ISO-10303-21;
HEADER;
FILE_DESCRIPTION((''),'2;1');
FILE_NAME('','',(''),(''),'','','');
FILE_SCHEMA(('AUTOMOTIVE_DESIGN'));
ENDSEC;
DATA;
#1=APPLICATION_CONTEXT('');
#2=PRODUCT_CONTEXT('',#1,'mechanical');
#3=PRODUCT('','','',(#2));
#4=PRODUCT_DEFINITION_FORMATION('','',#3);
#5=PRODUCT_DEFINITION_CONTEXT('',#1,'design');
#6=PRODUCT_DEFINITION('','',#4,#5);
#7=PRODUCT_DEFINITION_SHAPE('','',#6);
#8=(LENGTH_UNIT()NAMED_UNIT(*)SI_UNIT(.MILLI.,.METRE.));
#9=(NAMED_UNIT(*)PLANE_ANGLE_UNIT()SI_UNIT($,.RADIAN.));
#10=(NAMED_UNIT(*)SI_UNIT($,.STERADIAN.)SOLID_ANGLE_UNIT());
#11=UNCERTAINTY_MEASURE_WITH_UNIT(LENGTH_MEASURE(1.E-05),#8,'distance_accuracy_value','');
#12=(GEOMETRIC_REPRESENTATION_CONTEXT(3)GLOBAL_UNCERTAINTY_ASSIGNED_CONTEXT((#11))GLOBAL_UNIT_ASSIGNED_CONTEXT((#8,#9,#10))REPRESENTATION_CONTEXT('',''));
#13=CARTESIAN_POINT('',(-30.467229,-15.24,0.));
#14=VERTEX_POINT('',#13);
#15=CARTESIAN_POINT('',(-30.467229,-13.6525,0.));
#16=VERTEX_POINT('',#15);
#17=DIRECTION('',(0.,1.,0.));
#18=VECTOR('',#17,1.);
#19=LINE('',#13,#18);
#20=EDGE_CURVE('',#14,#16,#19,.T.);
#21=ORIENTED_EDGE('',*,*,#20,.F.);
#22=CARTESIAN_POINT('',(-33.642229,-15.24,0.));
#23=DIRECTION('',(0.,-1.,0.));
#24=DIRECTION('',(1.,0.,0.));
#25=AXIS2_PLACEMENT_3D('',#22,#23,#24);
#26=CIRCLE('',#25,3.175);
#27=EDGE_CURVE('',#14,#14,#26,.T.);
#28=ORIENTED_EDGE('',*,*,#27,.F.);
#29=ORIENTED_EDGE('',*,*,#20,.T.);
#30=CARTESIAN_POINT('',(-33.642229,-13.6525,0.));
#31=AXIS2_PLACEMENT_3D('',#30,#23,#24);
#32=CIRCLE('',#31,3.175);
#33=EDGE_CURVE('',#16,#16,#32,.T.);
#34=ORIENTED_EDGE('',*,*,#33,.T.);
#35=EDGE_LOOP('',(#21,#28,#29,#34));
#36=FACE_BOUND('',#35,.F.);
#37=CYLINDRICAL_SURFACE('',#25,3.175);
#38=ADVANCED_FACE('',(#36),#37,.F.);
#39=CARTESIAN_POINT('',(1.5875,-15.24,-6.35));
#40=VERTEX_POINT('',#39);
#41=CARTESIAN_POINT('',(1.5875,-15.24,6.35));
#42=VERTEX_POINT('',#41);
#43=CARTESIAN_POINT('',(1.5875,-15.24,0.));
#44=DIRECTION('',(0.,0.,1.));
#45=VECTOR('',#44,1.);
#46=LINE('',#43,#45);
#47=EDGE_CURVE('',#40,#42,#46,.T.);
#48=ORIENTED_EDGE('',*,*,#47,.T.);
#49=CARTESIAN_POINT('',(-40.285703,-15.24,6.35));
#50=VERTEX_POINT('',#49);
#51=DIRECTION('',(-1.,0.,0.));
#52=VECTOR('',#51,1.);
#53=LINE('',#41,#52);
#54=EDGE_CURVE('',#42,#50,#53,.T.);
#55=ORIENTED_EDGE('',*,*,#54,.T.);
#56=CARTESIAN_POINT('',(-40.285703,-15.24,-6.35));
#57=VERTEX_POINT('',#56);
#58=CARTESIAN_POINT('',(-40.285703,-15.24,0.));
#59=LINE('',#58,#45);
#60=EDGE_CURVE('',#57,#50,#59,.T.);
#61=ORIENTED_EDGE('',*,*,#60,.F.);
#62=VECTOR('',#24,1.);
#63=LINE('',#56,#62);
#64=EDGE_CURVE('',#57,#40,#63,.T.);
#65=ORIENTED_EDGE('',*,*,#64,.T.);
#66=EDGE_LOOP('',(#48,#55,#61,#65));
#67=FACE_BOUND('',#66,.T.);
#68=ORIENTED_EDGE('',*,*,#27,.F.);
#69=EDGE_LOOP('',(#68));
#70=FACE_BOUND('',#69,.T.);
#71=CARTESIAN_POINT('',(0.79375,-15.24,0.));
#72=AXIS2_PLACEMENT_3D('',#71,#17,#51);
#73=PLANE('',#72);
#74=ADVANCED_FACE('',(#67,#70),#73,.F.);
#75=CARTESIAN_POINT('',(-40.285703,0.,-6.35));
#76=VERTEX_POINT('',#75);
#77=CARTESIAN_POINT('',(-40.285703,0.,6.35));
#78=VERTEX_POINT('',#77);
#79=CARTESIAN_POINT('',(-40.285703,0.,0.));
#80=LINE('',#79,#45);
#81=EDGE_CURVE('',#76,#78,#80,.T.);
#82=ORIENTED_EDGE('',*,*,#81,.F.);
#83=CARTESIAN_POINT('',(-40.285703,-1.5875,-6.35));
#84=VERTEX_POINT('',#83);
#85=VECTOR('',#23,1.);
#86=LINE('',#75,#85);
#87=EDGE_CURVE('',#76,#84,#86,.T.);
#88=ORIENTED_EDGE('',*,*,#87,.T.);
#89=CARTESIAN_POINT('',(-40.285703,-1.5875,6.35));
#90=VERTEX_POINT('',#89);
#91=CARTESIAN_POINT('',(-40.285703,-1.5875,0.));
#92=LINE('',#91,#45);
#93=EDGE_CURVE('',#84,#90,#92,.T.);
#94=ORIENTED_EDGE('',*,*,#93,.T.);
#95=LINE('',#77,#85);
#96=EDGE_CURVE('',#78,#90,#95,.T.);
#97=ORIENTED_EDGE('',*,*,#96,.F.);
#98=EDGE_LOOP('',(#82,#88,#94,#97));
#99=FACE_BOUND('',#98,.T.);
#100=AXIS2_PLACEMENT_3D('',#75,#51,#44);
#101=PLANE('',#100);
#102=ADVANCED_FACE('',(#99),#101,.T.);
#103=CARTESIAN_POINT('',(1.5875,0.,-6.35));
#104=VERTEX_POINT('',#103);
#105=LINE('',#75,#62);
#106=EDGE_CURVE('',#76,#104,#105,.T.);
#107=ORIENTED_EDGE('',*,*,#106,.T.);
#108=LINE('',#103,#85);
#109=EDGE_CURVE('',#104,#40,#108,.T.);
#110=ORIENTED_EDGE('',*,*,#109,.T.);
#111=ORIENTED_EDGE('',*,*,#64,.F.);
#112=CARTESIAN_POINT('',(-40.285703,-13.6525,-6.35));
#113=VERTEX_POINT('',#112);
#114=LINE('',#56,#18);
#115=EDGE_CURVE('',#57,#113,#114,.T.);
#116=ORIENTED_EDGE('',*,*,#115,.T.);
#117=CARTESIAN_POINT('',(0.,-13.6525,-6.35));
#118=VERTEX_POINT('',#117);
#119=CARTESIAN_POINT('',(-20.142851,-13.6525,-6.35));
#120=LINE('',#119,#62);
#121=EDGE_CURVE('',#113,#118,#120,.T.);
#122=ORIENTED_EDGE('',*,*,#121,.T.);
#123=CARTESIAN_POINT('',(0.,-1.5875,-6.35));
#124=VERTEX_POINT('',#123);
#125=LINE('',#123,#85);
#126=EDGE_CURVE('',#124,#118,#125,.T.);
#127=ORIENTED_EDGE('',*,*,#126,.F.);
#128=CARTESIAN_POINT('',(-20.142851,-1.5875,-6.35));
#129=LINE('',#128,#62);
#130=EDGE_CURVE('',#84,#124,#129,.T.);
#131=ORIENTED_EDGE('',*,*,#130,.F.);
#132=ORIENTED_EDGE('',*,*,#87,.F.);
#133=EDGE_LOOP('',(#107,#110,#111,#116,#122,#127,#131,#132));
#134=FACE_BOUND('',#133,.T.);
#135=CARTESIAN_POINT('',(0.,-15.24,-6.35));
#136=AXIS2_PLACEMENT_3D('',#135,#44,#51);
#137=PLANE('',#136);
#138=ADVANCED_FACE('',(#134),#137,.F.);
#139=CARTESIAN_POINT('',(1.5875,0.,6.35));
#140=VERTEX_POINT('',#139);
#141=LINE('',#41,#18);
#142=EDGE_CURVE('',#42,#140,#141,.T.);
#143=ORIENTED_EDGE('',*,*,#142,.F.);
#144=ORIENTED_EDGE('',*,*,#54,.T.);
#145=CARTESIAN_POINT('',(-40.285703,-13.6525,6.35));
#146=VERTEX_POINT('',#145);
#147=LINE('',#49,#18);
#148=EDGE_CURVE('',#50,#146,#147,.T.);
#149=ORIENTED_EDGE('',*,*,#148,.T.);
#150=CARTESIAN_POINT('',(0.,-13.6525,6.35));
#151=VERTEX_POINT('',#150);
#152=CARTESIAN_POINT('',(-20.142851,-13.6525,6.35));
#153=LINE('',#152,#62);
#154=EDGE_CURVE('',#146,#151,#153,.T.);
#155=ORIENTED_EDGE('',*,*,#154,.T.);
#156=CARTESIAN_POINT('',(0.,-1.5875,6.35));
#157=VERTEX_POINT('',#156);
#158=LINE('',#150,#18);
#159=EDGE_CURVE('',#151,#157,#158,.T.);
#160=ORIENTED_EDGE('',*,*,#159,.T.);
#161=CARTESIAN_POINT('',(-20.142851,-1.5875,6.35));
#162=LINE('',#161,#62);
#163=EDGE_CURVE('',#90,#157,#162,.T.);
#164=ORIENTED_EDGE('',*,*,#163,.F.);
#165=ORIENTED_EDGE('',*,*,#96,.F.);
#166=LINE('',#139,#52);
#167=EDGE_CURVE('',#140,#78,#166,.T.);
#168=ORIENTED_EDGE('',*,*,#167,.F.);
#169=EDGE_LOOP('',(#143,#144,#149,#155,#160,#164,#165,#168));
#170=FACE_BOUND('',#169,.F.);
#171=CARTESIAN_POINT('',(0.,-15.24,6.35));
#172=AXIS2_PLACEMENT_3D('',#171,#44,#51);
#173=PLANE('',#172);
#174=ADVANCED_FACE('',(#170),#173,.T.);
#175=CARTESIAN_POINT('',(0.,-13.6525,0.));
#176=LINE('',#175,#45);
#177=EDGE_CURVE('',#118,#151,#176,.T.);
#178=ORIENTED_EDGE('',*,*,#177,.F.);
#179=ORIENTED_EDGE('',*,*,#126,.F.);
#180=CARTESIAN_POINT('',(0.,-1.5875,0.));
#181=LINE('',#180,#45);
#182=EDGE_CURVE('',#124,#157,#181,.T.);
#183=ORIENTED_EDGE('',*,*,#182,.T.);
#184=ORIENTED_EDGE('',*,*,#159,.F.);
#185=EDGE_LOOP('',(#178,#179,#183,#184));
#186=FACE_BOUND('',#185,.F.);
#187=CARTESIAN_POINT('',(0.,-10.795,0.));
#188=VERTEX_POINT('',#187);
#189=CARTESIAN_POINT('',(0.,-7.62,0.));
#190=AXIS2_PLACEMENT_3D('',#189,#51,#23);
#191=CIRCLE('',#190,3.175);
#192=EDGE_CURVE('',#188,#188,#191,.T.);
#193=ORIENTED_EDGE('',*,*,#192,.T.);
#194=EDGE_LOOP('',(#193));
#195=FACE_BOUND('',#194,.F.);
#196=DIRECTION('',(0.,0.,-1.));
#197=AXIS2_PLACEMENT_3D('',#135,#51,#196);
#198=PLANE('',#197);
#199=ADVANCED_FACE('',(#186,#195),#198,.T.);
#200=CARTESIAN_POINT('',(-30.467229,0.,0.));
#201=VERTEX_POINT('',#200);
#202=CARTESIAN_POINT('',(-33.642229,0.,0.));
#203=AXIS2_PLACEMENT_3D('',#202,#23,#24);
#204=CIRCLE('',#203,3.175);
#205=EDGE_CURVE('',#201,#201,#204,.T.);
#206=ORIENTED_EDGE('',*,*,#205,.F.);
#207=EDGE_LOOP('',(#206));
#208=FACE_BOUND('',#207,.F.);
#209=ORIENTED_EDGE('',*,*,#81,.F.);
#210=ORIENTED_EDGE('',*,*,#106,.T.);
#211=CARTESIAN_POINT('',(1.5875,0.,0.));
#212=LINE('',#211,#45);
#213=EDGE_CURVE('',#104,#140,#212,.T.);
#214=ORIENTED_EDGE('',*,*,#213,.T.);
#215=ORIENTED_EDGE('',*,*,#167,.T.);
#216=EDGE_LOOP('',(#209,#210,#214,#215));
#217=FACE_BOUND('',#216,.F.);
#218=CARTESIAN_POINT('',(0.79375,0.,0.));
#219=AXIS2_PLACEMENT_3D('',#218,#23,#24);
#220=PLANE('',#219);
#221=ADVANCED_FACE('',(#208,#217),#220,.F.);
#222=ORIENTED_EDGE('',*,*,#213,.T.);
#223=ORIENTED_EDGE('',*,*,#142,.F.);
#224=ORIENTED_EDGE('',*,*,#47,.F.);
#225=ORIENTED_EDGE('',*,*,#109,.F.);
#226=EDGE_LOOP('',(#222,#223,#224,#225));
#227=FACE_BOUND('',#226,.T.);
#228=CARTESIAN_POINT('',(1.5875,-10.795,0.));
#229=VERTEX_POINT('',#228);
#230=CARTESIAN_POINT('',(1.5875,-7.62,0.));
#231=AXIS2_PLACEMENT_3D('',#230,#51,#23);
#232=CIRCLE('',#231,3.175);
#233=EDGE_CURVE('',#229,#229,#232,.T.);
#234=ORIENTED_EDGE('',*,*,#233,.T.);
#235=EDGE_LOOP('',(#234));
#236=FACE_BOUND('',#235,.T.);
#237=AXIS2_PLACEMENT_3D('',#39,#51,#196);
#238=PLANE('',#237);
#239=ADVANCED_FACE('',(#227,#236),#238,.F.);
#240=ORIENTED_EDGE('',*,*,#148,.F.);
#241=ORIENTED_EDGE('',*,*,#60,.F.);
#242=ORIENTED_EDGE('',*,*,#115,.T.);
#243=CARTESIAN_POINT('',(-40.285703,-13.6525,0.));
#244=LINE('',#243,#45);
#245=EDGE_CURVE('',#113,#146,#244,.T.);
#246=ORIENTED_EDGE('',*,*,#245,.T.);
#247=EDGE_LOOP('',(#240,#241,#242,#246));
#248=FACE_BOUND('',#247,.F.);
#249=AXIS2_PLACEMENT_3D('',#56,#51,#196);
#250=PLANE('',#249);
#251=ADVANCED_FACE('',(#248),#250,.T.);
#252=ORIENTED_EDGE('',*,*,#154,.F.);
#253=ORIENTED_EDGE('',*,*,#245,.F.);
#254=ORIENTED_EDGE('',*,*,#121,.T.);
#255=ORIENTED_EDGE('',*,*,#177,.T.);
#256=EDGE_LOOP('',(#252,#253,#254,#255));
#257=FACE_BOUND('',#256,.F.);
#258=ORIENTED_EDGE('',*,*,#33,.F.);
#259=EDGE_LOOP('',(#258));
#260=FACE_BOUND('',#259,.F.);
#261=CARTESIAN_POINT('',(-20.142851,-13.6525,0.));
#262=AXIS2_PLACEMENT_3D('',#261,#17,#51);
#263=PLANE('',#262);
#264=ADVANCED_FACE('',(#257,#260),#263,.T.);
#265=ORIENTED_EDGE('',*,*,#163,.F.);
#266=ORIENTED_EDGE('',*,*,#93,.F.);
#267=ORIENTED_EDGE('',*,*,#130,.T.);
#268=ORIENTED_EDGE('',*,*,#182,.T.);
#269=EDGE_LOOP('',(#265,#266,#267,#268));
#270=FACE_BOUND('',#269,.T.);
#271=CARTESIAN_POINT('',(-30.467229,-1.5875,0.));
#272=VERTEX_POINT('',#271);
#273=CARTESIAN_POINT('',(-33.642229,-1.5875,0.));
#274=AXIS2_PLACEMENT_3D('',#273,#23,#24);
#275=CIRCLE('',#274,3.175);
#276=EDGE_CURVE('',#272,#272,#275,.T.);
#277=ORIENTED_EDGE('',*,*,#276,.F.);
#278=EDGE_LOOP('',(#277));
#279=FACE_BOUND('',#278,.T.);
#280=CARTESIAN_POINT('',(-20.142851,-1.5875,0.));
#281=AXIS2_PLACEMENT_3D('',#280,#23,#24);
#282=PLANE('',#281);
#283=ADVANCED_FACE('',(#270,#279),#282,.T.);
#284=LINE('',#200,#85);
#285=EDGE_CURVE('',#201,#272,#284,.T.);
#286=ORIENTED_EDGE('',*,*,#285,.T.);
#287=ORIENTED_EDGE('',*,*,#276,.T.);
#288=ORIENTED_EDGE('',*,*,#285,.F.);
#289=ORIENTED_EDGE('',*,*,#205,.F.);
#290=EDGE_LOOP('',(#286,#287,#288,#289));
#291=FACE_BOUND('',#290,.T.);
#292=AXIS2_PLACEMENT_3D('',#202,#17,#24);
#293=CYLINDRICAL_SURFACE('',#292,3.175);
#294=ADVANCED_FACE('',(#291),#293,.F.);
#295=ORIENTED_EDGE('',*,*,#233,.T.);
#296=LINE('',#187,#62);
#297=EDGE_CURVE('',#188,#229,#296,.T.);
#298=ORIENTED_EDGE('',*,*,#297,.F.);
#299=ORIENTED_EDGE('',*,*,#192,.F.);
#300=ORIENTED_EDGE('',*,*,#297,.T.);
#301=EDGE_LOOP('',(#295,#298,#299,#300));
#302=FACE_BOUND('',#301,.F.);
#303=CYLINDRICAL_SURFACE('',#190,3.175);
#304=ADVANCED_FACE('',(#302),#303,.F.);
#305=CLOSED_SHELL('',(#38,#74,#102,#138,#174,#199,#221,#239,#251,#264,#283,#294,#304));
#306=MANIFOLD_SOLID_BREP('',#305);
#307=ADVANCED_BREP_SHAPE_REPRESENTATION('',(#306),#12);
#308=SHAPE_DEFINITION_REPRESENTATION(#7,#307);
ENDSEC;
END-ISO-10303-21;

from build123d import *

# Parameters (mm, degrees)
F0_W     = 40.2857027948
F0_H     = 12.7
F0_R     = 3.175
F1_DEPTH = 1.5875
F0_W_2   = 1.5875
F2_DEPTH = 7.62
F4_R     = 3.175
F5_DEPTH = 25.4


# Not quite as in the source:
# - a length typed as a fraction of an inch, garbled in the dataset ("3 / 203.2 mm" for 3/8 in), is restored


with BuildPart() as f1:
    # F0 (on Front) → F1 (new body)
    with BuildSketch(Plane.XZ):
        with Locations((-20.1428513974, 0)):
            Rectangle(F0_W, F0_H)
        with Locations((-33.6422286928, 0)):
            Circle(F0_R, mode=Mode.SUBTRACT)
    extrude(amount=F1_DEPTH)

    # F0 (on Front) → F2 (join)
    with BuildSketch(Plane.XZ):
        with Locations((0.79375, 0)):
            Rectangle(F0_W_2, F0_H)
    extrude(amount=F2_DEPTH)

    # F3: F1 across face


with BuildPart() as f1_1:
    add(f1.part)
    add(f1.part.mirror(Plane(origin=(0.79375, -7.62, 0), x_dir=(1, 0, 0), z_dir=(0, -1, 0))))

    # F4 (on face) → F5 (cut)
    with BuildSketch(Plane(origin=(0, 0, 0), x_dir=(0, -1, 0), z_dir=(-1, 0, 0))):
        with Locations((7.62, 0)):
            Circle(F4_R)
    extrude(amount=-F5_DEPTH, mode=Mode.SUBTRACT)


solid = f1_1.part
